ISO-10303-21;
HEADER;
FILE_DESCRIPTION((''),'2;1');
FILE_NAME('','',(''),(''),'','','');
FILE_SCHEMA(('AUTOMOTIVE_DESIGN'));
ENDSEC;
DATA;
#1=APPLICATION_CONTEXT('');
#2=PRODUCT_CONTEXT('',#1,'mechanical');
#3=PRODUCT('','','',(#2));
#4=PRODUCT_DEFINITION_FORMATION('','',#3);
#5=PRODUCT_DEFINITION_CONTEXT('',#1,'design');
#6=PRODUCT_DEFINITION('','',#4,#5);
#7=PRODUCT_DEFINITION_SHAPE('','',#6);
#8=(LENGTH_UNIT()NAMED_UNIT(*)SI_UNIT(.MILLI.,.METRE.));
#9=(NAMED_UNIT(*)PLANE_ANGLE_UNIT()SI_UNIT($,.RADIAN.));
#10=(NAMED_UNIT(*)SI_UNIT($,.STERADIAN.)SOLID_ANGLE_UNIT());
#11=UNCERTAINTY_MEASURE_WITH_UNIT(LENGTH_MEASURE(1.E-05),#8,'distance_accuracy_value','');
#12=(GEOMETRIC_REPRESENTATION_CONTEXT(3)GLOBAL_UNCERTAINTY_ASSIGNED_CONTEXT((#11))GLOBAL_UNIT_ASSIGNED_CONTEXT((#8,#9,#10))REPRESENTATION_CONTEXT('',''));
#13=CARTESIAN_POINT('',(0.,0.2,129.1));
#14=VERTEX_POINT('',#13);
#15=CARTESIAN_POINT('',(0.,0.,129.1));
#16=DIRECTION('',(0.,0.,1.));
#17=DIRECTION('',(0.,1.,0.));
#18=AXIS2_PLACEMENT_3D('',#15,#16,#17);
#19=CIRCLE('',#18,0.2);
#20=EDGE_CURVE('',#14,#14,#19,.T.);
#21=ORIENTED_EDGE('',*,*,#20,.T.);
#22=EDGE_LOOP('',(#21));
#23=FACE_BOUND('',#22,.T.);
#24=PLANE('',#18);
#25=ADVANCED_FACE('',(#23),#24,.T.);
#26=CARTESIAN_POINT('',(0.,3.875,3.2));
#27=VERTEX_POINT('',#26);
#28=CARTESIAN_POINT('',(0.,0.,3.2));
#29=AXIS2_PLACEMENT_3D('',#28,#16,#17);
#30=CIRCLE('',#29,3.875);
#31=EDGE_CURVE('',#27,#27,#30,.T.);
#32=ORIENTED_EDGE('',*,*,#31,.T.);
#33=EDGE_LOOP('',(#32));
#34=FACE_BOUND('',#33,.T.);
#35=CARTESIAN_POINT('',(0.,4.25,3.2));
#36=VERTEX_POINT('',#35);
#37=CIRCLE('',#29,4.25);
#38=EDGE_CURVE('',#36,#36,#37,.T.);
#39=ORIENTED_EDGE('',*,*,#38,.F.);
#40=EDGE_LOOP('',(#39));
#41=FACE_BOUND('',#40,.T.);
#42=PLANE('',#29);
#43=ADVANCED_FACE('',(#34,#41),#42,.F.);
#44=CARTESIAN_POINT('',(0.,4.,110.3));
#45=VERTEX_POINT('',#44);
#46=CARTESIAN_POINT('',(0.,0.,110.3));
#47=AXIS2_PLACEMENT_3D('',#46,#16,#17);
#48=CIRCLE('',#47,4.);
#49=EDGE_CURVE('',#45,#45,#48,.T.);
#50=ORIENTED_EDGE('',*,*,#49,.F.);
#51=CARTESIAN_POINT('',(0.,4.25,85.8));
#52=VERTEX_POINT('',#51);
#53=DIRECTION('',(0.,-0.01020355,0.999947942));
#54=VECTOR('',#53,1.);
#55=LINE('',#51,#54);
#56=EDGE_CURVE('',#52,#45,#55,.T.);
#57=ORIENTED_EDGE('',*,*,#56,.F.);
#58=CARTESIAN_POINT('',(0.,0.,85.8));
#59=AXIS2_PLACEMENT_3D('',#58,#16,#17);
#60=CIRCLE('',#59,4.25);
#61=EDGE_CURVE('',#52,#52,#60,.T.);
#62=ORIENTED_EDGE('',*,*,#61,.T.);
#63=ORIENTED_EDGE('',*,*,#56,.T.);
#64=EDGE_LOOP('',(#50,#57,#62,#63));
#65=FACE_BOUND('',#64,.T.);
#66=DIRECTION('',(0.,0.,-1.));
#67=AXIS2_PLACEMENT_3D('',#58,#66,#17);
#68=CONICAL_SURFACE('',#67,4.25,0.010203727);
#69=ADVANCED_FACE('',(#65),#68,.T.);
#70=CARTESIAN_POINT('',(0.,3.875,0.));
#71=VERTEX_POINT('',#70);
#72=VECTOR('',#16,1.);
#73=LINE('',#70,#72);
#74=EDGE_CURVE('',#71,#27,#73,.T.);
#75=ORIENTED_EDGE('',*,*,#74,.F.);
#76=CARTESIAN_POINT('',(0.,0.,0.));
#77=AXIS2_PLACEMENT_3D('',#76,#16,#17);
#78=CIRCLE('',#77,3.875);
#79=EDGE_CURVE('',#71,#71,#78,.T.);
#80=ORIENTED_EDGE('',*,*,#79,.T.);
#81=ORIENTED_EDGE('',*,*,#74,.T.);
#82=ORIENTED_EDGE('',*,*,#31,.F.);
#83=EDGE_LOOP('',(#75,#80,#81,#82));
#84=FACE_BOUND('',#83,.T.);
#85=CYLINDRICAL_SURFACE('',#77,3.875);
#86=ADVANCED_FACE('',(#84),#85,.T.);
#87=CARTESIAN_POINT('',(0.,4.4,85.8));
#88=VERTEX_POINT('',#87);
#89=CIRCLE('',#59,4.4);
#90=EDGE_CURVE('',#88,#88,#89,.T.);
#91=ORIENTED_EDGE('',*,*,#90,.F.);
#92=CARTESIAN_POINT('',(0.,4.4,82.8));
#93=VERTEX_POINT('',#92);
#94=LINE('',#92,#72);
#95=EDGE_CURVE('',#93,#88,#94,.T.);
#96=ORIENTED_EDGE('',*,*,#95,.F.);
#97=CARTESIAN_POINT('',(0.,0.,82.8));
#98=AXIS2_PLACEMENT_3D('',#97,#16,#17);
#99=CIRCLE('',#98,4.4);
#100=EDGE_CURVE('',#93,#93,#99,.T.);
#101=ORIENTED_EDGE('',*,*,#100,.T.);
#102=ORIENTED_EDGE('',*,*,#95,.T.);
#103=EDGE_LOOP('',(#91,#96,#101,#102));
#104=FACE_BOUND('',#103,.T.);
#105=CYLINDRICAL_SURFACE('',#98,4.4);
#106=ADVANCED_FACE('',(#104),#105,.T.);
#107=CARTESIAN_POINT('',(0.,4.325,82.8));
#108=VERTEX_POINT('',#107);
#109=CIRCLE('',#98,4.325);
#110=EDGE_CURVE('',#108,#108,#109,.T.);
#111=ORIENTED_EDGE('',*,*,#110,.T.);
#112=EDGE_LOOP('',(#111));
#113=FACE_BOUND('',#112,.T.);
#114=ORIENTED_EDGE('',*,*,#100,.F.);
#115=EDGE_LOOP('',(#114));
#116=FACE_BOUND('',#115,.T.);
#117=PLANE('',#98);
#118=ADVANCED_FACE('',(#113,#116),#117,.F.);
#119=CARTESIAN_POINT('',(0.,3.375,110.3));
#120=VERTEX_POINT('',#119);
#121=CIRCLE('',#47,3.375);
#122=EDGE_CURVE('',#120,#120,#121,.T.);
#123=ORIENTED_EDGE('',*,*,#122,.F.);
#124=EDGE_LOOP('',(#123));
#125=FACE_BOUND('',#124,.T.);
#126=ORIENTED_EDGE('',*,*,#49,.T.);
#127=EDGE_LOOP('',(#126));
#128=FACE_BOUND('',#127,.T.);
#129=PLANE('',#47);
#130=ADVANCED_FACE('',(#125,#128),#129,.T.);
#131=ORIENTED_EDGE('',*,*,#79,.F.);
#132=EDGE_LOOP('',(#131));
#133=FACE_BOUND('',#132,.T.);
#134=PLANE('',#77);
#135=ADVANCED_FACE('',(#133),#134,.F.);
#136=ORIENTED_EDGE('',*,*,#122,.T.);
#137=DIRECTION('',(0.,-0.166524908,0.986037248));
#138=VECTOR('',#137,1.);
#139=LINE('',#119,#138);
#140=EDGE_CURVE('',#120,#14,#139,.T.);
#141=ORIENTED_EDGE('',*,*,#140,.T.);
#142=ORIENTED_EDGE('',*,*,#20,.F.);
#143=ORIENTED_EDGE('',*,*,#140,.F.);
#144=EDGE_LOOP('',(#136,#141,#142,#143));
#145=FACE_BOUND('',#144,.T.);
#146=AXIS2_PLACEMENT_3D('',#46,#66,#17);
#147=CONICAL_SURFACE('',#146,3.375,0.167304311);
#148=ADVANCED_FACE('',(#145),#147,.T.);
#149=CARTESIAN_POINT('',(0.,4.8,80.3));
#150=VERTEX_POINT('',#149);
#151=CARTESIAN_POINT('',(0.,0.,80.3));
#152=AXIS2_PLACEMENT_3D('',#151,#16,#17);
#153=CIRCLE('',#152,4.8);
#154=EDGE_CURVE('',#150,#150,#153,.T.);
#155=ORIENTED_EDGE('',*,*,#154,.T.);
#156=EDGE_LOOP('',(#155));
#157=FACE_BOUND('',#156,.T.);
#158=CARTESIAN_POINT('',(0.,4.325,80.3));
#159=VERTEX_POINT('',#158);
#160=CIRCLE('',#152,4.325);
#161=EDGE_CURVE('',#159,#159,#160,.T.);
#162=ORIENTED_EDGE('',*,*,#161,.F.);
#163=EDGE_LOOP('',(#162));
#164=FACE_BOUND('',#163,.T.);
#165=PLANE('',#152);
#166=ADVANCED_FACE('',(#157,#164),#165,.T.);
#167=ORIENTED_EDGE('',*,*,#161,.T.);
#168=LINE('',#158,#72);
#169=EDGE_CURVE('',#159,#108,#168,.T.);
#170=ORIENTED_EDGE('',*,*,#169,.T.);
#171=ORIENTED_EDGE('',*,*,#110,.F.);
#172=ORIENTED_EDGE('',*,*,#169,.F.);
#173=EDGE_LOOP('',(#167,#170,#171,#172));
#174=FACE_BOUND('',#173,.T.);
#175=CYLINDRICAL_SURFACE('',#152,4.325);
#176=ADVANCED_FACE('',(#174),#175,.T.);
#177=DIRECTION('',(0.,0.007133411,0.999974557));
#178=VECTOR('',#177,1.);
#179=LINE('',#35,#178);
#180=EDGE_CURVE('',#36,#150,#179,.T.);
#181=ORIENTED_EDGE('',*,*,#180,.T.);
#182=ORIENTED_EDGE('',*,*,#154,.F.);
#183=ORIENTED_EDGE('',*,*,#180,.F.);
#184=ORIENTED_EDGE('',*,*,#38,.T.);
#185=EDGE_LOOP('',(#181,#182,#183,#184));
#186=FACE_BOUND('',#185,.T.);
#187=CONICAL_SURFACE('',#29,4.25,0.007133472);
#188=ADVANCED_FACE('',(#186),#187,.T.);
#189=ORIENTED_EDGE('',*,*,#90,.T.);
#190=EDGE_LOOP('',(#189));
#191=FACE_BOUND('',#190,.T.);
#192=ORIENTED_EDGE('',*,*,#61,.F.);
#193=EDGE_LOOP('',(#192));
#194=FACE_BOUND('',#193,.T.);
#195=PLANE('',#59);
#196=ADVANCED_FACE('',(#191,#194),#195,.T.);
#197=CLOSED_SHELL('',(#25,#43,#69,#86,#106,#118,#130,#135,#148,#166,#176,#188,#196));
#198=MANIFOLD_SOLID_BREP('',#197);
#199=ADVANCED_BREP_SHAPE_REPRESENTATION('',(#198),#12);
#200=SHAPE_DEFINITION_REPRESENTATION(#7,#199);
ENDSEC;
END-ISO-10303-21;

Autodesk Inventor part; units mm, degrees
ref_plane "YZ Plane" through (0, 0, 0) normal (1, 0, 0) x (0, 1, 0)
ref_plane "XZ Plane" through (0, 0, 0) normal (0, 1, 0) x (-1, 0, 0)
ref_plane "XY Plane" through (0, 0, 0) normal (0, 0, 1) x (1, 0, 0)
sketch "Sketch1" plane through (0, 0, 0) normal (1, 0, 0) x (0, 1, 0)
  line L0 (0, 0) -> (3.875, 0)
  line L1 (3.875, 0) -> (3.875, 3.2)
  line L2 (3.875, 3.2) -> (4.25, 3.2)
  line L3 (4.25, 3.2) -> (4.8, 80.3)
  line L4 (4.8, 80.3) -> (4.325, 80.3)
  line L5 (0, 0) -> (0, 129.1)
  line L6 (4.325, 80.3) -> (4.325, 82.8)
  line L7 (4.325, 82.8) -> (4.4, 82.8)
  line L8 (4.4, 82.8) -> (4.4, 85.8)
  line L9 (4.4, 85.8) -> (4.25, 85.8)
  line L10 (4.25, 85.8) -> (4, 110.3)
  line L11 (4, 110.3) -> (3.375, 110.3)
  line L12 (3.375, 110.3) -> (0.2, 129.1)
  line L13 (0.2, 129.1) -> (0, 129.1)
  dimension "d0" = 3.875
  dimension "d1" = 3.2
  dimension "d2" = 4.25
  dimension "d3" = 4.8
  dimension "d4" = 80.3
  dimension "d5" = 4.325
  dimension "d6" = 2.5
  dimension "d7" = 3
  dimension "d8" = 4.4
  dimension "d9" = 4.25
  dimension "d10" = 4
  dimension "d11" = 3.375
  dimension "d12" = 129.1
  dimension "d13" = 30
  dimension "d15" = 0.2
revolve "Revolution1" add sketch "Sketch1" angle 360 about axis through (0, 0, 0) along (0, 0, 1)
properties part number "pen"
